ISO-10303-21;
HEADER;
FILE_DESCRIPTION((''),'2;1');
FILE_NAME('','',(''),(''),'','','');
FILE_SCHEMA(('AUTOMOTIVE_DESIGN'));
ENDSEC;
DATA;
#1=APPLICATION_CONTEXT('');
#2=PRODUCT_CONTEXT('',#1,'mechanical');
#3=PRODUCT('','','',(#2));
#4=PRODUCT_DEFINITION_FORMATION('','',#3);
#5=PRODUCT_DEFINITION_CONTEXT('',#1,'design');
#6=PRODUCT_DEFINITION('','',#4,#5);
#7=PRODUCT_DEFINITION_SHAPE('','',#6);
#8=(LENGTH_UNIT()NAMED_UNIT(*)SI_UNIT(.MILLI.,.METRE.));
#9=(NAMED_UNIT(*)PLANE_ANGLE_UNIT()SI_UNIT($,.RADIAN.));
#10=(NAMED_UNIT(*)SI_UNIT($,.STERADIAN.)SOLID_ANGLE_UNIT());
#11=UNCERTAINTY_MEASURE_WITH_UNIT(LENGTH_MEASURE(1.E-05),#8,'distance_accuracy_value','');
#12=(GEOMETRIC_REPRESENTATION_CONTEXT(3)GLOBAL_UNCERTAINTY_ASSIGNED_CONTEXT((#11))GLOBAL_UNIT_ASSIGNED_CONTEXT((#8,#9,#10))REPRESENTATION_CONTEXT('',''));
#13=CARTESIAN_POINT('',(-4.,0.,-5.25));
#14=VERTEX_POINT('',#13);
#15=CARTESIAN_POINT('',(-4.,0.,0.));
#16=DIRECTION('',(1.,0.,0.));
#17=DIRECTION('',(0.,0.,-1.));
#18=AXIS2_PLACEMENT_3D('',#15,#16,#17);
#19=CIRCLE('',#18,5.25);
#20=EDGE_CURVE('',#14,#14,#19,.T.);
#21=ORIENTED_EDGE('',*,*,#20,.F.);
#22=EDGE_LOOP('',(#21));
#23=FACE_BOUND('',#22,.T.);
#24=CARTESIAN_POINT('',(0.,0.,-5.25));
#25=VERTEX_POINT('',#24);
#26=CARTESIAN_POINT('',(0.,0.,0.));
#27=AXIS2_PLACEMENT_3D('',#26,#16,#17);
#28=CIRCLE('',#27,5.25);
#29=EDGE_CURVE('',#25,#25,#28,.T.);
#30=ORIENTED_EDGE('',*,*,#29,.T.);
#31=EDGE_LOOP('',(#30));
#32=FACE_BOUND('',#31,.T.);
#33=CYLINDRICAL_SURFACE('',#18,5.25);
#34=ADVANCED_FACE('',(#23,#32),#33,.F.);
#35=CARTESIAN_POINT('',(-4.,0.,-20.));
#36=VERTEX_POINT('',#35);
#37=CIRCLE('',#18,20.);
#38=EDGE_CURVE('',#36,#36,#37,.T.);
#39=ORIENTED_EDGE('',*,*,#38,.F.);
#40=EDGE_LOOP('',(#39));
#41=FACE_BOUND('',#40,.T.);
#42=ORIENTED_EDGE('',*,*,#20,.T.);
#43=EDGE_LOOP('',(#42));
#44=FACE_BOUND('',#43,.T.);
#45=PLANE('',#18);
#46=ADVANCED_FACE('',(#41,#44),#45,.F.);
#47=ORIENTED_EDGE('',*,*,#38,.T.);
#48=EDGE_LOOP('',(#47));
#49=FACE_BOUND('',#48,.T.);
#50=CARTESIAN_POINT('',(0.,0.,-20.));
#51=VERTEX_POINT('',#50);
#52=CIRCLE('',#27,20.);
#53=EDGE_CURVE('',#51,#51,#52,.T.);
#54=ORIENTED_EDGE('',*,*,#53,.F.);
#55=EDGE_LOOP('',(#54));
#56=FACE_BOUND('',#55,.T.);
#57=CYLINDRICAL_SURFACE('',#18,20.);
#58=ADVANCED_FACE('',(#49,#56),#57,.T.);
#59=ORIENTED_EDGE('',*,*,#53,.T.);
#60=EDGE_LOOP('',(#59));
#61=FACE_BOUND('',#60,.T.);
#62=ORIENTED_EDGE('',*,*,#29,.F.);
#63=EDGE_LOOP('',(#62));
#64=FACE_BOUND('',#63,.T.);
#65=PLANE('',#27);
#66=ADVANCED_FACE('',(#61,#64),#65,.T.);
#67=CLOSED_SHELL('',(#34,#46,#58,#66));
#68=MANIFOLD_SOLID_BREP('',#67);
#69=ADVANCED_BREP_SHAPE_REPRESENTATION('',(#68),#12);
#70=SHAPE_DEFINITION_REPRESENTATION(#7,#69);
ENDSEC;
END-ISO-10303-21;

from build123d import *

# Parameters (mm, degrees)
SKETCH_1_R             = 20
SKETCH_1_R_2           = 5.25
SM_BASE_FLANGE_1_DEPTH = 4


# Sheet-metal steps are written as plain solids
with BuildPart() as part:
    # Sketch 1 → Базовая кромка1 (new body)
    with BuildSketch(Plane(origin=(0, 0, 0), x_dir=(0, 0, -1), z_dir=(1, 0, 0))):
        Circle(SKETCH_1_R)
        Circle(SKETCH_1_R_2, mode=Mode.SUBTRACT)
    extrude(amount=-SM_BASE_FLANGE_1_DEPTH)


solid = part.part
